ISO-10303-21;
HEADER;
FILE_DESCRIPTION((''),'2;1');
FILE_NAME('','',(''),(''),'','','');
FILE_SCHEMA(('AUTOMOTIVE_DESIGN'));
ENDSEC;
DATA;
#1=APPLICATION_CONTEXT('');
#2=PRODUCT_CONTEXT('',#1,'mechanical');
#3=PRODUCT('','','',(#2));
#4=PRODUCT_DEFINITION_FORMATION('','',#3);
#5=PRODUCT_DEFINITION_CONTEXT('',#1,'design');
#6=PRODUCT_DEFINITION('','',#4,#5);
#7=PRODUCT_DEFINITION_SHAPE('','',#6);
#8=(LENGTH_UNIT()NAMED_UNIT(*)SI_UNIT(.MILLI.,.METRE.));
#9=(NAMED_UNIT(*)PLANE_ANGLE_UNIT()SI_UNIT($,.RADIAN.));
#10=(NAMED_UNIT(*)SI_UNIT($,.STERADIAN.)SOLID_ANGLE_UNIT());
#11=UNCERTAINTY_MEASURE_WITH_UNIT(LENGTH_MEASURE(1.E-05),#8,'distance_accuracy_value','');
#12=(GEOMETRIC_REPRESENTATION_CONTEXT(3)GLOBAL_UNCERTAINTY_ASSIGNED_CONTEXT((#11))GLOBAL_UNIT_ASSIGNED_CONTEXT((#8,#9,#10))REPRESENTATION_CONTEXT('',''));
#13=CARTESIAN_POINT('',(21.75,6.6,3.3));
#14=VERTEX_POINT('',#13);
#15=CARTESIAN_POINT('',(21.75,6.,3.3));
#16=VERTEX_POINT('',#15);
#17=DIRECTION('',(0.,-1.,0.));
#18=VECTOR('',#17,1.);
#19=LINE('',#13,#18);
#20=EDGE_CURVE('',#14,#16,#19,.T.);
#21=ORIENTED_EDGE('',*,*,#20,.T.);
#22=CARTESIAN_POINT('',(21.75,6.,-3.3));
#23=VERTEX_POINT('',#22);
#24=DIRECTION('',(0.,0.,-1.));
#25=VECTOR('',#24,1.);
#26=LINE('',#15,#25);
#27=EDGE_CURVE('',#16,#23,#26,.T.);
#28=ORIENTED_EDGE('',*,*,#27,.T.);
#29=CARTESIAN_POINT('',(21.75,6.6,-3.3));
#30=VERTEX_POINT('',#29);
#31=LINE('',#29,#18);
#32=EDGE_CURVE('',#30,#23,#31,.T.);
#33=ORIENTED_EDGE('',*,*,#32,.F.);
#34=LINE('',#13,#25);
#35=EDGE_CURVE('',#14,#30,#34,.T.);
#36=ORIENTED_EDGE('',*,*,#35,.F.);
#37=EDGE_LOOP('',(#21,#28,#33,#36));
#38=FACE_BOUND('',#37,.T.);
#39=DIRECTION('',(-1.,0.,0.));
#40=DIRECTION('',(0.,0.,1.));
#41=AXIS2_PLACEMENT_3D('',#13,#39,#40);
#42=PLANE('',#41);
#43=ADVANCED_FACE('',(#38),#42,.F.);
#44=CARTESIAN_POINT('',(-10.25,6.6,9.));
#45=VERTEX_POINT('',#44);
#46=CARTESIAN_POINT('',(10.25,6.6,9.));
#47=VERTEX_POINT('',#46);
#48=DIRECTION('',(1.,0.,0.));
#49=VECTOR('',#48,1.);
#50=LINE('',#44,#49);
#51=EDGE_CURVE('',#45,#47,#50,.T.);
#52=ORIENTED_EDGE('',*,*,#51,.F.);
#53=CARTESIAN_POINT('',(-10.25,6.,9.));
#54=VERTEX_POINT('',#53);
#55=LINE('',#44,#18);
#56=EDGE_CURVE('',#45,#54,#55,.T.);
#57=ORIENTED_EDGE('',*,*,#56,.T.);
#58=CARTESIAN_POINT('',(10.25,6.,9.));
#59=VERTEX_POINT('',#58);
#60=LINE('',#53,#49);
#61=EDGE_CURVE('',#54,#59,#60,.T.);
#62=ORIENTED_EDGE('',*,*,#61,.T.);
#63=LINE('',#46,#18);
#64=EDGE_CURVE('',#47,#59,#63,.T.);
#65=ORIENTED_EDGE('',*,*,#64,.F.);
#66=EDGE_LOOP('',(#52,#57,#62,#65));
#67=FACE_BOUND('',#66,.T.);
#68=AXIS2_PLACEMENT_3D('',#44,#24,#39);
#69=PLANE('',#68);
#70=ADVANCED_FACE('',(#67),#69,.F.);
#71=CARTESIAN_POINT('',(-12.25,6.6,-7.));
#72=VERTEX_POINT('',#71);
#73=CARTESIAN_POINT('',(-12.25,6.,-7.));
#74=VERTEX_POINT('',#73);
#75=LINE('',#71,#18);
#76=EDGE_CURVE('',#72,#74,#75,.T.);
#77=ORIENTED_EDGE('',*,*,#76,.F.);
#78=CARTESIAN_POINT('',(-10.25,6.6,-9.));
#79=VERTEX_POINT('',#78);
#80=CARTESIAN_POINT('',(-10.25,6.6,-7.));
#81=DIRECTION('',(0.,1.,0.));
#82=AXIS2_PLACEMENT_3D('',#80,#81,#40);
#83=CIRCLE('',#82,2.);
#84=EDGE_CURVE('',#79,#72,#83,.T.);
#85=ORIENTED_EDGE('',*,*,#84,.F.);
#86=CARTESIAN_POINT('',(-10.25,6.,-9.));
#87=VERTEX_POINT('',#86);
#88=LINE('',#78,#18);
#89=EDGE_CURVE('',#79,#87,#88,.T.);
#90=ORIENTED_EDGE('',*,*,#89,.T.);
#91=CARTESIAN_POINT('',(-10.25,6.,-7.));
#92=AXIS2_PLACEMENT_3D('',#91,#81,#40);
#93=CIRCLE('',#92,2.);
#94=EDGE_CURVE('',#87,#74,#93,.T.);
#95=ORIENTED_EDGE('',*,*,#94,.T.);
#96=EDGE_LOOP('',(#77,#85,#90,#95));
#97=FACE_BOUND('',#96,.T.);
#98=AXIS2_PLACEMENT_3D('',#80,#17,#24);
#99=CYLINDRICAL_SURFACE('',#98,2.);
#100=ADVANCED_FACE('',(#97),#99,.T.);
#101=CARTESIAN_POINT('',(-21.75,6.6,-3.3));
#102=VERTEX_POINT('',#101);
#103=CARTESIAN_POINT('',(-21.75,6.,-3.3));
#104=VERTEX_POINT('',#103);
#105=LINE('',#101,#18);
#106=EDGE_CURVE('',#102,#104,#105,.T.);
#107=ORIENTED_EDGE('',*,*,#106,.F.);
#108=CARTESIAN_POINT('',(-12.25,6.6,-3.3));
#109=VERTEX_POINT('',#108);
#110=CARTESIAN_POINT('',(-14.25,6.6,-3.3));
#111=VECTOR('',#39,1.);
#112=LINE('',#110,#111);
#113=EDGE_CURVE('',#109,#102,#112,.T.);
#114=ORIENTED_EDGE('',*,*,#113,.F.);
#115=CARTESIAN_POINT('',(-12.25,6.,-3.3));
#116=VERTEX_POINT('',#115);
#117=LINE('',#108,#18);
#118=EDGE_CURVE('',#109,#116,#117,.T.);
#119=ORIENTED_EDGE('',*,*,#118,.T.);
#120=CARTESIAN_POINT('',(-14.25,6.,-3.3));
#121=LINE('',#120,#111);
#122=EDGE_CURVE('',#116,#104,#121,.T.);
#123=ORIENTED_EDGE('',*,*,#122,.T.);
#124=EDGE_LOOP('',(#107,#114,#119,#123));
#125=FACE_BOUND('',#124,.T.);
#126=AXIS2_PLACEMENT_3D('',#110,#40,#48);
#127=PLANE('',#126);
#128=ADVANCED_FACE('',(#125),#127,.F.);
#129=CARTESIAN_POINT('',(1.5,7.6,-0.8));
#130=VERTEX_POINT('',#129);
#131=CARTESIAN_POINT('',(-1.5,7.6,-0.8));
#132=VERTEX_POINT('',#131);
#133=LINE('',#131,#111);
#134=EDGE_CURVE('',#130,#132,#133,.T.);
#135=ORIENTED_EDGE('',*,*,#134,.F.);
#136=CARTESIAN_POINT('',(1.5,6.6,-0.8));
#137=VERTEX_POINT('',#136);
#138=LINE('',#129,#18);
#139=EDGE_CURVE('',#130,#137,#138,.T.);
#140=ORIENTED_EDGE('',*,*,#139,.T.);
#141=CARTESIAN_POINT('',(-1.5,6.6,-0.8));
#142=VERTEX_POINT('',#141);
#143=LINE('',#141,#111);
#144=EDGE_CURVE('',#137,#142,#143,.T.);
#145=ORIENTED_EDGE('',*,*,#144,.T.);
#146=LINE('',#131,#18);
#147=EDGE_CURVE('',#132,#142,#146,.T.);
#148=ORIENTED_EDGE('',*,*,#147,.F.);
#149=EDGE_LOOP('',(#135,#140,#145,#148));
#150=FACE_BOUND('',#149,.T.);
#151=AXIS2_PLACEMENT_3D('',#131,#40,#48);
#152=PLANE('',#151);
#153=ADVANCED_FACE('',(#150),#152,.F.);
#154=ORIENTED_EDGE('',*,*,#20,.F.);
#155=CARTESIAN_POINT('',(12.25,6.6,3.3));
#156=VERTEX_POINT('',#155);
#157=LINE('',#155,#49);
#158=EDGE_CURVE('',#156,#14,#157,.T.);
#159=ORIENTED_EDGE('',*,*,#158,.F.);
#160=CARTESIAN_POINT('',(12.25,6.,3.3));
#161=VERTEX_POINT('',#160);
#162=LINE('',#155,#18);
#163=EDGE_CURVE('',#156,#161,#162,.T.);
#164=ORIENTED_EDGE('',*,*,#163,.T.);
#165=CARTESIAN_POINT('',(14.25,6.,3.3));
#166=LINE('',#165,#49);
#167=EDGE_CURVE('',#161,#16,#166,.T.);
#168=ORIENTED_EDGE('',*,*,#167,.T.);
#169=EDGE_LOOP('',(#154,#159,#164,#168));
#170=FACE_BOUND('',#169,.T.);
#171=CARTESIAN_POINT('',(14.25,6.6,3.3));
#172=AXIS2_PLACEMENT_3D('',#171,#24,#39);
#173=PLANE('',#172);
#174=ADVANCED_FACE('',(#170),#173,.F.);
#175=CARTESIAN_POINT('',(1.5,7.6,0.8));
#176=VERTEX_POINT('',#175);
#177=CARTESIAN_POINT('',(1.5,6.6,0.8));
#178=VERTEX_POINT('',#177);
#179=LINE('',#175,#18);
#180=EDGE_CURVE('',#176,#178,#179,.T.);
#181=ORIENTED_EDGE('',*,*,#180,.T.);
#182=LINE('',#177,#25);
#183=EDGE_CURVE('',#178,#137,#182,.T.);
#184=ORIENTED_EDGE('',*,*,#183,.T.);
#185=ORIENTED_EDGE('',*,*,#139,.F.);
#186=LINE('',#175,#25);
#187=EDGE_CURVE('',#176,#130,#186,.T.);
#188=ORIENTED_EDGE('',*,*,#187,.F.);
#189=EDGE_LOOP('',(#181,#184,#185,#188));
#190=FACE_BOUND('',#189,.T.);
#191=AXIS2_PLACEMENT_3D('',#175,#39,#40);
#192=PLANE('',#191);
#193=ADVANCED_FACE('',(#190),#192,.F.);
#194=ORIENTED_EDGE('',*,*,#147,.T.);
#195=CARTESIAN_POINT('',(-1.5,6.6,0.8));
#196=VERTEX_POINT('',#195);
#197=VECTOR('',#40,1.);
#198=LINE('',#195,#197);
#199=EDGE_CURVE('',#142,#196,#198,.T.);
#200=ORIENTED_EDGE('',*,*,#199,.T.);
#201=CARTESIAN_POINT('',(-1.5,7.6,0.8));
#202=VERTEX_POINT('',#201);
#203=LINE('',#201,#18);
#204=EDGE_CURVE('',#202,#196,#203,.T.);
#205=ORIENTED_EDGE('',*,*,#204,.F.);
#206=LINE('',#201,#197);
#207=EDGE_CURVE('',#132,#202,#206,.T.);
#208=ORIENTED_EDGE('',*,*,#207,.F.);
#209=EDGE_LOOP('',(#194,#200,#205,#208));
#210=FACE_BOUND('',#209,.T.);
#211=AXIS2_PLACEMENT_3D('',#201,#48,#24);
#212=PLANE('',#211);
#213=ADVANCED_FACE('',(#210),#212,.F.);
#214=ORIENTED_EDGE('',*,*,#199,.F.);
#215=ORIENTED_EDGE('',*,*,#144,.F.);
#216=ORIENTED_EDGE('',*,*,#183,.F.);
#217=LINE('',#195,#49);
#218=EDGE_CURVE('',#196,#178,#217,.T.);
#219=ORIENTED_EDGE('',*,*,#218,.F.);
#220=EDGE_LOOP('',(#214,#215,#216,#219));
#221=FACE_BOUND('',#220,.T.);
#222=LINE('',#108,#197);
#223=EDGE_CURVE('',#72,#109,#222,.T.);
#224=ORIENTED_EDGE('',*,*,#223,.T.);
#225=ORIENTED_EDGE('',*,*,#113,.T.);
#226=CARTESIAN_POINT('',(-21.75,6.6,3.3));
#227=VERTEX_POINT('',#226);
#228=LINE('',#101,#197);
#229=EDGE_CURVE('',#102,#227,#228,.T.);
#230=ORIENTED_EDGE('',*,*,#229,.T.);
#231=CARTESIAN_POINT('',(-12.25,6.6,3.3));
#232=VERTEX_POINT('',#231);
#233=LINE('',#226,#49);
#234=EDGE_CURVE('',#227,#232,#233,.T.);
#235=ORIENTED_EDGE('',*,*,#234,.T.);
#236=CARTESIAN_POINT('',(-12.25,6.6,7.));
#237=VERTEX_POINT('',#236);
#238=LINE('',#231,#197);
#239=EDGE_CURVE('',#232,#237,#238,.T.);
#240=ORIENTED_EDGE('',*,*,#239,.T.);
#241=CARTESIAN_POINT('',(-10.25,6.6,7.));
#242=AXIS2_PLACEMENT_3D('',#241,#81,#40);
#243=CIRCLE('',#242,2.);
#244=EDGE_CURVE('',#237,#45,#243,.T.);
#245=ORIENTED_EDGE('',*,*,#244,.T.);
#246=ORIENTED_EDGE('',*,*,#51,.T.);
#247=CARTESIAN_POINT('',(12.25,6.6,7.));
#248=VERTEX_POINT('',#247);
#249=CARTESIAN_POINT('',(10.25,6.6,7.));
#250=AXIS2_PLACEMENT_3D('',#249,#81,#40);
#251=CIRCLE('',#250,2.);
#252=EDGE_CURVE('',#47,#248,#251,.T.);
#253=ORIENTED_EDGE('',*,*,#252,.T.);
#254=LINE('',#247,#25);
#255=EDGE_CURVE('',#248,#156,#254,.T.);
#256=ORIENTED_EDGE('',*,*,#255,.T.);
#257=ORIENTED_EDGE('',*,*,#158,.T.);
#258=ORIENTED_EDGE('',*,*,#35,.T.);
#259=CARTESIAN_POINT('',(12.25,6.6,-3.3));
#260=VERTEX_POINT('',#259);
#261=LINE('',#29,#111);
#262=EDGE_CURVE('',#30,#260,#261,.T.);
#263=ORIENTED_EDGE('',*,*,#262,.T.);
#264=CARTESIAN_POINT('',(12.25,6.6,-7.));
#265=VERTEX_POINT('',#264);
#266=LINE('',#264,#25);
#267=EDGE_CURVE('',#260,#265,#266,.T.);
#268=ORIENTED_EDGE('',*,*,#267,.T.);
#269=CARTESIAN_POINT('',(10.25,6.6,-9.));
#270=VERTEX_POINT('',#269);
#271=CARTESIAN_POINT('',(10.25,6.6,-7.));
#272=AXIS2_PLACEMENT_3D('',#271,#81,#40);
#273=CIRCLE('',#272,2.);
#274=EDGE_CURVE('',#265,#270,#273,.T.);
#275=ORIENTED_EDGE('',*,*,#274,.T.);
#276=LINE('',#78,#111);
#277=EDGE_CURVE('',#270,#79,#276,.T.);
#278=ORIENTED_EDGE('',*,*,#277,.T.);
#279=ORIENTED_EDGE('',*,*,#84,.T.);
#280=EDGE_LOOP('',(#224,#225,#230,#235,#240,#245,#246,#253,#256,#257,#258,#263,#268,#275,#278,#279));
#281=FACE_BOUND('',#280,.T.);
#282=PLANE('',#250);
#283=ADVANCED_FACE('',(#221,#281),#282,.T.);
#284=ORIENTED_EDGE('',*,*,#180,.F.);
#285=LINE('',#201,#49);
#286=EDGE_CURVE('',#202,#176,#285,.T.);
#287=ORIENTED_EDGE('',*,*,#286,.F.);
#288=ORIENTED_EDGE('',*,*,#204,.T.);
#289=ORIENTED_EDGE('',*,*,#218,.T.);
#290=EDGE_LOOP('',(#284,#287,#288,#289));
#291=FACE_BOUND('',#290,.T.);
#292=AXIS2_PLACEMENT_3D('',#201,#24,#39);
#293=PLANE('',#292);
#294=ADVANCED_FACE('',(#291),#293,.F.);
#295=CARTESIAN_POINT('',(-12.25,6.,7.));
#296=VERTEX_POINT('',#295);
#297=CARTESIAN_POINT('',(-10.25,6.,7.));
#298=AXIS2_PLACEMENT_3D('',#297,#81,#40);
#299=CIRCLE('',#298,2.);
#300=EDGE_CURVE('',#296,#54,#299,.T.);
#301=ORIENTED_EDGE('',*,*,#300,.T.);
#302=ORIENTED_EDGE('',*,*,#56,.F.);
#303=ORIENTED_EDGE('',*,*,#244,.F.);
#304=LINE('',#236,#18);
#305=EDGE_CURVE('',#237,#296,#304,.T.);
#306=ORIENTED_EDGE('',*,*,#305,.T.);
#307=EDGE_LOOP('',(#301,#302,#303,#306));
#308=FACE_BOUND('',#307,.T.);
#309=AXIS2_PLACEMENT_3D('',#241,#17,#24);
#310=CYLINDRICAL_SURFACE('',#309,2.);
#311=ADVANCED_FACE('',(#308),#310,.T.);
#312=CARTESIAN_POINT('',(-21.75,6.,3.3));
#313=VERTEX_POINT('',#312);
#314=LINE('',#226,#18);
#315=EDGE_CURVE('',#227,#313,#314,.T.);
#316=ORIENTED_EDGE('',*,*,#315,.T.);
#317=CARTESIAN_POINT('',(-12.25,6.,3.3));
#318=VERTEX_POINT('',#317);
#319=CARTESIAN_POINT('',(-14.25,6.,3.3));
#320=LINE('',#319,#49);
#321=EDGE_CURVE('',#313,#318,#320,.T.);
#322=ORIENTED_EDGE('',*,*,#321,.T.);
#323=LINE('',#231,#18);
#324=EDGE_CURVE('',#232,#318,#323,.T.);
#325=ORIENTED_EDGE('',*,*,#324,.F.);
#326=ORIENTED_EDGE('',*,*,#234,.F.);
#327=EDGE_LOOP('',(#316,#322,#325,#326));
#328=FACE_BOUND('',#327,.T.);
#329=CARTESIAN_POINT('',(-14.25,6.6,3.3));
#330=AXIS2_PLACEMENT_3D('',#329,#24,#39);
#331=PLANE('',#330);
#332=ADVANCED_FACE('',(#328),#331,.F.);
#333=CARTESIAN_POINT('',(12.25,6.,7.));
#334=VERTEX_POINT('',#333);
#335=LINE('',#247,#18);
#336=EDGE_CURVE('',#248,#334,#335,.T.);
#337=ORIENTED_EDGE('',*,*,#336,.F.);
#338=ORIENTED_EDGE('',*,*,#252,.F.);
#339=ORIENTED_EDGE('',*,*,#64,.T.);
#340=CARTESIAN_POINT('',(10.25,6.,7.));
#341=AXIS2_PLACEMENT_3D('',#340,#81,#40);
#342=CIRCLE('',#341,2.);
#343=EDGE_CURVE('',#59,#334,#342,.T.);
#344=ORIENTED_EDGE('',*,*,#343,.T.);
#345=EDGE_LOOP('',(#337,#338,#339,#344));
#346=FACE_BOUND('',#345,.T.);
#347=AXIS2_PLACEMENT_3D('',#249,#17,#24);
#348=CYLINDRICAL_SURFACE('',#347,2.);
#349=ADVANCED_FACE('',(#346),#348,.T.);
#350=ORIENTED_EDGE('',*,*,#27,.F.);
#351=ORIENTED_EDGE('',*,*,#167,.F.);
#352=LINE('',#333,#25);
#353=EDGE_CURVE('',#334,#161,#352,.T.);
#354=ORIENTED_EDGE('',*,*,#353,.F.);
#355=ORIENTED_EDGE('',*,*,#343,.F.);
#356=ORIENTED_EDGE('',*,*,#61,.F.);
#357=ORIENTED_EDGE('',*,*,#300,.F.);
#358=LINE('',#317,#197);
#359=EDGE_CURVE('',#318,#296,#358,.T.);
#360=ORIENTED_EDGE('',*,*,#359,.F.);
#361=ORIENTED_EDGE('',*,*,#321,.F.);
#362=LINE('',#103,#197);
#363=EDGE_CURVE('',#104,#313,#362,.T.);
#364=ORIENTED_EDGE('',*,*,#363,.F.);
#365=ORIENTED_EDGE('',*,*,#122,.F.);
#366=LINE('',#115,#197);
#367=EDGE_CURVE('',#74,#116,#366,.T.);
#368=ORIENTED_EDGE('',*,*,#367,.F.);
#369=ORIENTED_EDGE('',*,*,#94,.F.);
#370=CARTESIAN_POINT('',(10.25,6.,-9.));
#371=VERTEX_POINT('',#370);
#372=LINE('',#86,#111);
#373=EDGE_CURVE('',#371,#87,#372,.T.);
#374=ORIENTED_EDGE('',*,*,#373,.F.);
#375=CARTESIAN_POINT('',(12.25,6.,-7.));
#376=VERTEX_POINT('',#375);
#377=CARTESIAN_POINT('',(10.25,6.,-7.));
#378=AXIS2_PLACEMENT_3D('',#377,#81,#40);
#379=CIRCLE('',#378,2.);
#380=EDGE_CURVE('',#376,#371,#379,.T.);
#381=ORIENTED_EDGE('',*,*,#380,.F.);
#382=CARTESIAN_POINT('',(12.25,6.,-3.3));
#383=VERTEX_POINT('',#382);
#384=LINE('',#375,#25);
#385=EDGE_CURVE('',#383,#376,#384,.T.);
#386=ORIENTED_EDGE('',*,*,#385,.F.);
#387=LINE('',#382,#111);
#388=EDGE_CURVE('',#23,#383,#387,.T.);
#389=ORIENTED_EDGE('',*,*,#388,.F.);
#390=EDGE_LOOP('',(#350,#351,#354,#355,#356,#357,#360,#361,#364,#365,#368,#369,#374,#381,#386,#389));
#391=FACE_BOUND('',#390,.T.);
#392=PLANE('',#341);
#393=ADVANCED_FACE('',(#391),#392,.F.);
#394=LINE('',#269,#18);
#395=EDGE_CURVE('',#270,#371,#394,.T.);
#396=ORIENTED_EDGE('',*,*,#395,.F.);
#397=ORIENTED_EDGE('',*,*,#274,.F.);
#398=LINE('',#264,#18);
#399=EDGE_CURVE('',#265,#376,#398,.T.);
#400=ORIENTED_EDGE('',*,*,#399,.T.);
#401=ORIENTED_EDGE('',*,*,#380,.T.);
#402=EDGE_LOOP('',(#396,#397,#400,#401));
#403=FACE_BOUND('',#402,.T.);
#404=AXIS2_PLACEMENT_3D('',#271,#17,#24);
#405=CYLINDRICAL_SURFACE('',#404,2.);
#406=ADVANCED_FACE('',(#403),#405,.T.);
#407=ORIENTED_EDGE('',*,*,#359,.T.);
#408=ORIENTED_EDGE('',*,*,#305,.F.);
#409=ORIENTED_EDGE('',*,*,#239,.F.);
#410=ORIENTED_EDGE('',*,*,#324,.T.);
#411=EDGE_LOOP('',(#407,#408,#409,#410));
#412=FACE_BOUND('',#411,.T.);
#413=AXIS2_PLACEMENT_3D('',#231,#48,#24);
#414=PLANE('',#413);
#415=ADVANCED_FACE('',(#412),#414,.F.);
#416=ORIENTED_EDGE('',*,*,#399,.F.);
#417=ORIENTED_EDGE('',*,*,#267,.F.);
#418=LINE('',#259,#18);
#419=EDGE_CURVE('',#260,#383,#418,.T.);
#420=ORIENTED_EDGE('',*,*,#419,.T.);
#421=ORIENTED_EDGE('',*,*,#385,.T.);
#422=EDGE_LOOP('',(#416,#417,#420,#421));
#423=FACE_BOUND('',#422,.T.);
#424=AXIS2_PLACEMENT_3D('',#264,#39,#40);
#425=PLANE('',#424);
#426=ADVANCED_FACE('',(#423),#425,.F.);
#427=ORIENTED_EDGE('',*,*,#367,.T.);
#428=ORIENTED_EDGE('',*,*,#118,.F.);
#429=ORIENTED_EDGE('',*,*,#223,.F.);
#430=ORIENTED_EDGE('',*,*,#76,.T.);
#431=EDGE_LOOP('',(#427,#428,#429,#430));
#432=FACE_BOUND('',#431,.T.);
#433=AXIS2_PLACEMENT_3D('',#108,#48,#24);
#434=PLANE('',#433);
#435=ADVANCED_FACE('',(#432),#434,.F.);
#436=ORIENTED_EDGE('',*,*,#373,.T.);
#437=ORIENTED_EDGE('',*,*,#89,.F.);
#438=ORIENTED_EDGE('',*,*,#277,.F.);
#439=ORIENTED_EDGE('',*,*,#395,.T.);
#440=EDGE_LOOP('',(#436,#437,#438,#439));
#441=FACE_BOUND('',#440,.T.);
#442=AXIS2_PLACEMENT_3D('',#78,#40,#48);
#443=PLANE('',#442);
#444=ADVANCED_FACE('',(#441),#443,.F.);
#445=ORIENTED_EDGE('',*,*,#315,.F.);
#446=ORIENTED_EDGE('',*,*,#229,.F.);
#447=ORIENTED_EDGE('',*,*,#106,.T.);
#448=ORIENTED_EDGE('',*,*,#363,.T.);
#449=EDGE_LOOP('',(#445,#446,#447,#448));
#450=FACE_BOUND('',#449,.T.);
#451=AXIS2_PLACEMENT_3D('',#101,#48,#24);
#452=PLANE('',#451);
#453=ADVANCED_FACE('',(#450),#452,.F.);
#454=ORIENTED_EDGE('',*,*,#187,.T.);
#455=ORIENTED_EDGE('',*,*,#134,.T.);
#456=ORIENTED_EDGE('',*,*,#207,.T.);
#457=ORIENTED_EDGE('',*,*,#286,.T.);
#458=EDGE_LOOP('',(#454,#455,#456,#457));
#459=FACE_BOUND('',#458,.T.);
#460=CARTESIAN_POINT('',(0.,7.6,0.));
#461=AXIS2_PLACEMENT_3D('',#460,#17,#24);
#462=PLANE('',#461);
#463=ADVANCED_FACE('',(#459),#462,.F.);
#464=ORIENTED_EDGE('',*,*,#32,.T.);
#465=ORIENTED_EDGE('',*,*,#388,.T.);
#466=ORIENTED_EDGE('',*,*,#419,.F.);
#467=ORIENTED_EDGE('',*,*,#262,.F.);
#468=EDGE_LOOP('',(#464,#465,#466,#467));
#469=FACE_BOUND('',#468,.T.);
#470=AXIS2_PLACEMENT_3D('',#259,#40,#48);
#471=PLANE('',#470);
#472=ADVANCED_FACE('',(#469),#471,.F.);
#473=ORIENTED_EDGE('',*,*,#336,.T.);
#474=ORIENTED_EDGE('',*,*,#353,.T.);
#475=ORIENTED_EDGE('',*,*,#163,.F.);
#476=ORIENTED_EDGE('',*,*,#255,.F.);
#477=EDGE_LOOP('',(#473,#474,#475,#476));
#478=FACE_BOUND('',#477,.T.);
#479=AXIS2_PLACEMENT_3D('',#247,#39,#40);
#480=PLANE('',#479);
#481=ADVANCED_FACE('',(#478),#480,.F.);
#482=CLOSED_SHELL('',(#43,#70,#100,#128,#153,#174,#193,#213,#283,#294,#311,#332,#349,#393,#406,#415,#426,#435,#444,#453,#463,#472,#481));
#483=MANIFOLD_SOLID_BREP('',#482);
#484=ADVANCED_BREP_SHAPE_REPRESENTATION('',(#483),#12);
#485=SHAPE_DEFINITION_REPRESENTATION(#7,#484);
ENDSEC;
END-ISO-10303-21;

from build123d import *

# Parameters (mm, degrees)
STOCK_MODIFYCOMPONENTPART_1_START = 6
STOCK_MODIFYCOMPONENTPART_1_DEPTH = 0.6
SKETCH1_W                         = 3
SKETCH1_H                         = 1.6
BOSS_EXTRUDE1_DEPTH               = 1


# Read off the part's stored shape, not the designer's step: Stock-ModifyComponentPart-1
with BuildPart() as part:
    # Stock-ModifyComponentPart-1 outline → Stock-ModifyComponentPart-1 (new body)
    with BuildSketch(Plane(origin=(0, 0, 0), x_dir=(1, 0, 0), z_dir=(0, 1, 0)).offset(STOCK_MODIFYCOMPONENTPART_1_START)):
        with BuildLine():
            Line((12.25, 3.3), (12.25, 7))
            ThreePointArc((12.25, 7), (11.664213562, 8.414213562), (10.25, 9))
            Line((10.25, 9), (-10.25, 9))
            ThreePointArc((-10.25, 9), (-11.664213562, 8.414213562), (-12.25, 7))
            Line((-12.25, 7), (-12.25, 3.3))
            Line((-12.25, 3.3), (-21.75, 3.3))
            Line((-21.75, 3.3), (-21.75, -3.3))
            Line((-21.75, -3.3), (-12.25, -3.3))
            Line((-12.25, -3.3), (-12.25, -7))
            ThreePointArc((-12.25, -7), (-11.664213562, -8.414213562), (-10.25, -9))
            Line((-10.25, -9), (10.25, -9))
            ThreePointArc((10.25, -9), (11.664213562, -8.414213562), (12.25, -7))
            Line((12.25, -7), (12.25, -3.3))
            Line((12.25, -3.3), (21.75, -3.3))
            Line((21.75, -3.3), (21.75, 3.3))
            Line((21.75, 3.3), (12.25, 3.3))
        make_face()
    extrude(amount=STOCK_MODIFYCOMPONENTPART_1_DEPTH)

    # Sketch1 → Boss-Extrude1 (add)
    with BuildSketch(Plane(origin=(0, 6.6, 0), x_dir=(1, 0, 0), z_dir=(0, 1, 0))):
        Rectangle(SKETCH1_W, SKETCH1_H)
    extrude(amount=BOSS_EXTRUDE1_DEPTH)


solid = part.part
